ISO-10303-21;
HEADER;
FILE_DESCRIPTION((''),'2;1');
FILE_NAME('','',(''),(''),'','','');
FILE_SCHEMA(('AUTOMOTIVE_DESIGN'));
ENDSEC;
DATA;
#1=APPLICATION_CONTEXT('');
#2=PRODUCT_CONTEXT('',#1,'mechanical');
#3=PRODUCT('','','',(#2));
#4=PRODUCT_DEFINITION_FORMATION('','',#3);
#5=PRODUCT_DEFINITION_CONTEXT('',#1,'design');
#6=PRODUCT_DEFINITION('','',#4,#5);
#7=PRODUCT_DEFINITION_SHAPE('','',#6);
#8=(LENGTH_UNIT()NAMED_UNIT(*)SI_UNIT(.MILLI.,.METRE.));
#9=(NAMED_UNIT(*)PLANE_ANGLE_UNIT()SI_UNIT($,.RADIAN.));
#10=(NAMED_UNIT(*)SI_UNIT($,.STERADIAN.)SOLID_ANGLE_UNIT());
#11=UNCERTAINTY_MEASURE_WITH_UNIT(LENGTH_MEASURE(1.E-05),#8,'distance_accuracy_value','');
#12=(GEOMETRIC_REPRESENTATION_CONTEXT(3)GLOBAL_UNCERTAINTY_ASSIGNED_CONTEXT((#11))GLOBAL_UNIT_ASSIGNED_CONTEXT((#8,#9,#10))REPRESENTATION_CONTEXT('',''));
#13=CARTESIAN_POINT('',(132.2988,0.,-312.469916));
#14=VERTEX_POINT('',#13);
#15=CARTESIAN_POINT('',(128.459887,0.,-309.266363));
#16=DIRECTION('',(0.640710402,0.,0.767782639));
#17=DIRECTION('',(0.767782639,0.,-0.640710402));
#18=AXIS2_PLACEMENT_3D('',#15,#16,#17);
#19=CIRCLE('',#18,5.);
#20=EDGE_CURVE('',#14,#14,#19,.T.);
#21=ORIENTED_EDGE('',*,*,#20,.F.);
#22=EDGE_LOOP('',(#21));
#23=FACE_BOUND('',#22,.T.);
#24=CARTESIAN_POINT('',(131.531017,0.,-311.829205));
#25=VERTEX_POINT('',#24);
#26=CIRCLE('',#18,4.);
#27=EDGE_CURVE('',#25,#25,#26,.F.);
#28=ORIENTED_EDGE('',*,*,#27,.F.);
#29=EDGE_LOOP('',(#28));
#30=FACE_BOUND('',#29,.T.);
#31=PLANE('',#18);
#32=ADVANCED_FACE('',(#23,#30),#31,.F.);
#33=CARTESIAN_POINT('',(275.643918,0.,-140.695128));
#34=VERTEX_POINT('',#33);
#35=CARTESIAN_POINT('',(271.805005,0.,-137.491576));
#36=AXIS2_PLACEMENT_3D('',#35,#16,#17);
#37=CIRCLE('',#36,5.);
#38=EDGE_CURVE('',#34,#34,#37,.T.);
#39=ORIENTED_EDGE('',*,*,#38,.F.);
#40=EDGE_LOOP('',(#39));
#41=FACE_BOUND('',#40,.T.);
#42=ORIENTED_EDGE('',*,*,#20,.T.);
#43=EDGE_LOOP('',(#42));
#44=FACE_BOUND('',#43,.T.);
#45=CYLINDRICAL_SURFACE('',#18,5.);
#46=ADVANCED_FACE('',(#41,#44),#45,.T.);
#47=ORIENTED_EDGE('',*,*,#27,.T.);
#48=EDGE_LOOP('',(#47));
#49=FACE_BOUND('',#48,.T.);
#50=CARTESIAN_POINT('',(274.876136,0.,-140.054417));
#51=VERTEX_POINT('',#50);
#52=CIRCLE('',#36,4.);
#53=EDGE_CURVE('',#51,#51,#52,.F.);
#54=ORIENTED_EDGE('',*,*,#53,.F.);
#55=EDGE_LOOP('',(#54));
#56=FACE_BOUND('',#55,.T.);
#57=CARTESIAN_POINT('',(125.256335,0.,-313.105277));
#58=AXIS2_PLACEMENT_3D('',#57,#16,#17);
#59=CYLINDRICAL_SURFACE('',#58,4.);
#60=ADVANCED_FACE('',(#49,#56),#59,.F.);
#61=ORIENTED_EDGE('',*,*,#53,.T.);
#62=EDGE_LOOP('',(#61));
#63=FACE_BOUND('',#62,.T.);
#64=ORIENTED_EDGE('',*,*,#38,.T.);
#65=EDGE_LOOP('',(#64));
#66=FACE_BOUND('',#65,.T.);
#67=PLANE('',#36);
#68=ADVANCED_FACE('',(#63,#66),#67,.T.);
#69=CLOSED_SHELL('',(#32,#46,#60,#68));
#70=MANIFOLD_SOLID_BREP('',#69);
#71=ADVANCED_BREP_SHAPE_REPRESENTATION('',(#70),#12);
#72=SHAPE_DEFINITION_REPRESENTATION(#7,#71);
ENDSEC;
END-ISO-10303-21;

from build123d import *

# Parameters (mm, degrees)
SWEEP1_PROFILE_R     = 5
CUT_SWEEP1_START     = -155.143759139
CUT_SWEEP1_OUTLINE_R = 4
CUT_SWEEP1_DEPTH     = 223.728408348


# Read off the part's stored shape, not the designer's step: Cut-Sweep1
with BuildPart() as part:
    # Sweep1: sweep along a path in Sketch19
    with BuildLine(Plane(origin=(0, 0, 0), x_dir=(1, 0, 0), z_dir=(0, 1, 0))) as sweep1_path:
        Line((128.459886798, 309.266363493), (271.805005174, 137.491575647))
    # Sweep1 profile (on start of the path) → Sweep1 (sweep)
    with BuildSketch(Plane(origin=(128.459886798, 0, -309.266363493), x_dir=(0.767782639292157, 0, -0.6407104016648784), z_dir=(0.6407104016648784, 0, 0.767782639292157))):
        Circle(SWEEP1_PROFILE_R)
    sweep(path=sweep1_path.line)

    # Cut-Sweep1 outline → Cut-Sweep1 (cut)
    with BuildSketch(Plane(origin=(0, 0, 0), x_dir=(0.7677826392921571, 0, -0.6407104016648781), z_dir=(0.6407104016648781, 0, 0.7677826392921571)).offset(CUT_SWEEP1_START)):
        with Locations((296.779446904, 0)):
            Circle(CUT_SWEEP1_OUTLINE_R)
    extrude(amount=CUT_SWEEP1_DEPTH, mode=Mode.SUBTRACT)


solid = part.part
